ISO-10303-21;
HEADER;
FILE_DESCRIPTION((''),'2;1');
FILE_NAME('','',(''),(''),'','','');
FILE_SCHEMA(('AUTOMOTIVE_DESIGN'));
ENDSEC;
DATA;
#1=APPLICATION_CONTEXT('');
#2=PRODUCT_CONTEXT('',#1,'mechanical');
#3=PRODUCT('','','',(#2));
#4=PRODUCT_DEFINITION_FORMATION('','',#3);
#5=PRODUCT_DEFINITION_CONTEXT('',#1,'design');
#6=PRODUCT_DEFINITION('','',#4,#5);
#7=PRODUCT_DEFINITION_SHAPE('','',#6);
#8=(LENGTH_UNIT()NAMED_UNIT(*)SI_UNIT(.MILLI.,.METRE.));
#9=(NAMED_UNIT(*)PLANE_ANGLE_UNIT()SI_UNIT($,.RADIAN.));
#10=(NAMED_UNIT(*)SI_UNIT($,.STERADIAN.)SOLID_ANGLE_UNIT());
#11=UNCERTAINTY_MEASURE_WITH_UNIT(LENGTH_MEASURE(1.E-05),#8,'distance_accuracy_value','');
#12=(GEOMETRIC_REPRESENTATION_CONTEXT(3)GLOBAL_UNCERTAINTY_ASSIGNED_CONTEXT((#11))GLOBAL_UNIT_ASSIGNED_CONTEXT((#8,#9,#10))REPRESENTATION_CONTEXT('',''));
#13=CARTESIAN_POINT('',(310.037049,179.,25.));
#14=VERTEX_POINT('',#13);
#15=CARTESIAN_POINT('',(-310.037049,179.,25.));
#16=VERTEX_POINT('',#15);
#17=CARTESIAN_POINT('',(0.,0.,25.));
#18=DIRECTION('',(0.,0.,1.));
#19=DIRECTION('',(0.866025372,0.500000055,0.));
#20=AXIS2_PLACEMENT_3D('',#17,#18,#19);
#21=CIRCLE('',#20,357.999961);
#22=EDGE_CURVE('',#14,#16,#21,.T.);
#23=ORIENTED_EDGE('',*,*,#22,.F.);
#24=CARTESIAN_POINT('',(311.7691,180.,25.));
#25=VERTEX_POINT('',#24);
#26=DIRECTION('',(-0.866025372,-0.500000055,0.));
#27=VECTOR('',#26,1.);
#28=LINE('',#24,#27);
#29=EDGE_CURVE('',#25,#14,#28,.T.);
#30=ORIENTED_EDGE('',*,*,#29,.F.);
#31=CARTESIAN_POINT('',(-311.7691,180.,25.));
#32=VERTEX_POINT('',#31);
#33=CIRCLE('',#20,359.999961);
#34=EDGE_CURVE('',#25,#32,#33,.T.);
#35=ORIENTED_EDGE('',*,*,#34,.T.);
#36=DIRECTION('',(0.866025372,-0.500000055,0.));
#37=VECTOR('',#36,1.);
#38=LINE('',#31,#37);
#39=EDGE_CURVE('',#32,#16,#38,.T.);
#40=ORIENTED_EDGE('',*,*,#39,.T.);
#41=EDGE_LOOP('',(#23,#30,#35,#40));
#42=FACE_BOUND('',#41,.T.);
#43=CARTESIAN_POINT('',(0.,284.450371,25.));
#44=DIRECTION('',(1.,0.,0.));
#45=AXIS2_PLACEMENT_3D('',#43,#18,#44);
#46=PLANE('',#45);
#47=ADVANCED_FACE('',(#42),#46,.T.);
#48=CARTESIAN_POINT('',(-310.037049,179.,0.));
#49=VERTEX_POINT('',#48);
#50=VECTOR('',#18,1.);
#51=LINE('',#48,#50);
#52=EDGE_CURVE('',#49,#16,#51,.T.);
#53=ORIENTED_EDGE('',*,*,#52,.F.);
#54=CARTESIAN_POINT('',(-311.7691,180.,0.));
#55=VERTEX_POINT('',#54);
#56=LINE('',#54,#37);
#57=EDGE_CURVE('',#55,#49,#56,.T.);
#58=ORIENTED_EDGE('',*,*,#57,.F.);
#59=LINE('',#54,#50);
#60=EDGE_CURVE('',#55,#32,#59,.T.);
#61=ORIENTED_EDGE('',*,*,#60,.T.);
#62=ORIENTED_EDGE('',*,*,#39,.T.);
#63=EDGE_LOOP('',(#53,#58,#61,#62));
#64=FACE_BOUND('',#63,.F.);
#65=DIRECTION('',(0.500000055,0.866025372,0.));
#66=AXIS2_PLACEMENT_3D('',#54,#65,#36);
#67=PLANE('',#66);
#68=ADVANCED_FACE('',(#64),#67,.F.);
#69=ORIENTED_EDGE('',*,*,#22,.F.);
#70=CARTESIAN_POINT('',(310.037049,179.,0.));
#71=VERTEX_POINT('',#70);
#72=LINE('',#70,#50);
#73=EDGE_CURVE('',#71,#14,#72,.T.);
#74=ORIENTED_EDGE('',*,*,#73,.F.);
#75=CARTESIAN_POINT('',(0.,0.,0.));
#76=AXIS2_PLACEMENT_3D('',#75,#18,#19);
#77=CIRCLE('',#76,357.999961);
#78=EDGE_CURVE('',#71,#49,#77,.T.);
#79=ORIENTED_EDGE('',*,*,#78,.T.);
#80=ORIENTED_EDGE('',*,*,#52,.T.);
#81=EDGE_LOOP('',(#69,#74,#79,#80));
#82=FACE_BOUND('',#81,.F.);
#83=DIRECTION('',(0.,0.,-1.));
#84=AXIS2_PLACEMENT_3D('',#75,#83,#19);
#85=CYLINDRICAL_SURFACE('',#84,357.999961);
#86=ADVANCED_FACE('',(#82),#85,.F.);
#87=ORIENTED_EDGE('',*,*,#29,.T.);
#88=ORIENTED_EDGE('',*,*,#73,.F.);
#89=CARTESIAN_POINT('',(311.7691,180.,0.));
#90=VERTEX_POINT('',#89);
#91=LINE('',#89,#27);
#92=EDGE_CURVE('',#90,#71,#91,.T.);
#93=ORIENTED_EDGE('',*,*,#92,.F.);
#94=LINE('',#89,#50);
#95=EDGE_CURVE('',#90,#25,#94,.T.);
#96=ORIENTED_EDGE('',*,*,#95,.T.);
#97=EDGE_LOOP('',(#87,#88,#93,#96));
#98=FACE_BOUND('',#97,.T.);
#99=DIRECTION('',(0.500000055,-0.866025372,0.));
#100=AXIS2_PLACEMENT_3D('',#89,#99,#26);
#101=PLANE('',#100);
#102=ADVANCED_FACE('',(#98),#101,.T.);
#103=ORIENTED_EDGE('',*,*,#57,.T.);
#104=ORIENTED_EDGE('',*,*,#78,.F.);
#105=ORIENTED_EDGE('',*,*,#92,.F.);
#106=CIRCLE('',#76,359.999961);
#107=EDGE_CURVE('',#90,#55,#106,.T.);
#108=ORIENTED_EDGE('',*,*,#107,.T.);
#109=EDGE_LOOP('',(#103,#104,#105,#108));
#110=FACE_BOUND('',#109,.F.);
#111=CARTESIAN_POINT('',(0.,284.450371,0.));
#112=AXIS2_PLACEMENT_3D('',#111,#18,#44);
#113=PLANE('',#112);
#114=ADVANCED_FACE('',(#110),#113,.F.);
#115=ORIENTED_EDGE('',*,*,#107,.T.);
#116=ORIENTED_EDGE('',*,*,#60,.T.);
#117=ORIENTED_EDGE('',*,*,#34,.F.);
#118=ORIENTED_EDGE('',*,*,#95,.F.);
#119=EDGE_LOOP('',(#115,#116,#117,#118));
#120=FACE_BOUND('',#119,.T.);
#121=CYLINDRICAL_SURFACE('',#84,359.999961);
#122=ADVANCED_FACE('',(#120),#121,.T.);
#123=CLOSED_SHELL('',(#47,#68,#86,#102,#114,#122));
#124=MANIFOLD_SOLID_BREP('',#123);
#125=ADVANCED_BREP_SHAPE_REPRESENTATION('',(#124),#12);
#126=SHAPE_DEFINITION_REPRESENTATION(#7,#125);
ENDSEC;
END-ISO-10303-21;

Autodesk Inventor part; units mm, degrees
ref_plane "YZ Plane" through (0, 0, 0) normal (1, 0, 0) x (0, 1, 0)
ref_plane "XZ Plane" through (0, 0, 0) normal (0, 1, 0) x (-1, 0, 0)
ref_plane "XY Plane" through (0, 0, 0) normal (0, 0, 1) x (1, 0, 0)
sketch "Sketch1" plane through (0, 0, 0) normal (0, 0, 1) x (1, 0, 0)
  arc A0 (311.7691, 180) -> (-311.7691, 180) centre (0, 0) ccw
  line L0 (0, 0) -> (-311.7691, 180) construction
  line L1 (0, 0) -> (0, 362.16) construction
  line L2 (0, 0) -> (311.7691, 180) construction
  arc A1 (-311.7691, 180) -> (311.7691, 180) centre (0, 0) ccw construction
  point P0 (-311.7691, 180)
  point P1 (311.7691, 180)
  dimension "d28" = 720
  dimension "d30" = 120
contour flange "Contour Flange1" sketch "Sketch1" thickness 2 bend radius 2 width 25 along (0, 0, 1) mid plane no both sides no wall seen from (0, 360, 0) lies toward (0, -1, 0) curves A0
bend "Bend1"
corner "Corner1"
equation "\"d28\" = Шстр_диам_внутр"
equation "\"d31\" = Thickness"
equation "\"d32\" = BendReliefWidth"
equation "\"d33\" = BendReliefDepth"
equation "\"d34\" = MinimumRemnant"
equation "\"d35\" = TransitionRadius"
equation "\"d37\" = BendRadius"
equation "\"d39\" = CornerReliefSize"
equation "\"d40\" = GapSize"
equation "\"d41\" = JacobiRadiusSize"
equation "\"BendRadius\" = Thickness"
equation "\"BendReliefWidth\" = Thickness"
equation "\"BendReliefDepth\" = 0.5 * Thickness"
equation "\"CornerReliefSize\" = 4 * Thickness"
equation "\"MinimumRemnant\" = 2 * Thickness"
equation "\"TransitionRadius\" = BendRadius"
equation "\"JacobiRadiusSize\" = BendRadius"
equation "\"GapSize\" = Thickness"
equation "\"Шстр_диам_внутр\" = 720"
equation "\"Thickness\" = 2"
properties part number "DMF2.0 01 44 Gear rim 4"
